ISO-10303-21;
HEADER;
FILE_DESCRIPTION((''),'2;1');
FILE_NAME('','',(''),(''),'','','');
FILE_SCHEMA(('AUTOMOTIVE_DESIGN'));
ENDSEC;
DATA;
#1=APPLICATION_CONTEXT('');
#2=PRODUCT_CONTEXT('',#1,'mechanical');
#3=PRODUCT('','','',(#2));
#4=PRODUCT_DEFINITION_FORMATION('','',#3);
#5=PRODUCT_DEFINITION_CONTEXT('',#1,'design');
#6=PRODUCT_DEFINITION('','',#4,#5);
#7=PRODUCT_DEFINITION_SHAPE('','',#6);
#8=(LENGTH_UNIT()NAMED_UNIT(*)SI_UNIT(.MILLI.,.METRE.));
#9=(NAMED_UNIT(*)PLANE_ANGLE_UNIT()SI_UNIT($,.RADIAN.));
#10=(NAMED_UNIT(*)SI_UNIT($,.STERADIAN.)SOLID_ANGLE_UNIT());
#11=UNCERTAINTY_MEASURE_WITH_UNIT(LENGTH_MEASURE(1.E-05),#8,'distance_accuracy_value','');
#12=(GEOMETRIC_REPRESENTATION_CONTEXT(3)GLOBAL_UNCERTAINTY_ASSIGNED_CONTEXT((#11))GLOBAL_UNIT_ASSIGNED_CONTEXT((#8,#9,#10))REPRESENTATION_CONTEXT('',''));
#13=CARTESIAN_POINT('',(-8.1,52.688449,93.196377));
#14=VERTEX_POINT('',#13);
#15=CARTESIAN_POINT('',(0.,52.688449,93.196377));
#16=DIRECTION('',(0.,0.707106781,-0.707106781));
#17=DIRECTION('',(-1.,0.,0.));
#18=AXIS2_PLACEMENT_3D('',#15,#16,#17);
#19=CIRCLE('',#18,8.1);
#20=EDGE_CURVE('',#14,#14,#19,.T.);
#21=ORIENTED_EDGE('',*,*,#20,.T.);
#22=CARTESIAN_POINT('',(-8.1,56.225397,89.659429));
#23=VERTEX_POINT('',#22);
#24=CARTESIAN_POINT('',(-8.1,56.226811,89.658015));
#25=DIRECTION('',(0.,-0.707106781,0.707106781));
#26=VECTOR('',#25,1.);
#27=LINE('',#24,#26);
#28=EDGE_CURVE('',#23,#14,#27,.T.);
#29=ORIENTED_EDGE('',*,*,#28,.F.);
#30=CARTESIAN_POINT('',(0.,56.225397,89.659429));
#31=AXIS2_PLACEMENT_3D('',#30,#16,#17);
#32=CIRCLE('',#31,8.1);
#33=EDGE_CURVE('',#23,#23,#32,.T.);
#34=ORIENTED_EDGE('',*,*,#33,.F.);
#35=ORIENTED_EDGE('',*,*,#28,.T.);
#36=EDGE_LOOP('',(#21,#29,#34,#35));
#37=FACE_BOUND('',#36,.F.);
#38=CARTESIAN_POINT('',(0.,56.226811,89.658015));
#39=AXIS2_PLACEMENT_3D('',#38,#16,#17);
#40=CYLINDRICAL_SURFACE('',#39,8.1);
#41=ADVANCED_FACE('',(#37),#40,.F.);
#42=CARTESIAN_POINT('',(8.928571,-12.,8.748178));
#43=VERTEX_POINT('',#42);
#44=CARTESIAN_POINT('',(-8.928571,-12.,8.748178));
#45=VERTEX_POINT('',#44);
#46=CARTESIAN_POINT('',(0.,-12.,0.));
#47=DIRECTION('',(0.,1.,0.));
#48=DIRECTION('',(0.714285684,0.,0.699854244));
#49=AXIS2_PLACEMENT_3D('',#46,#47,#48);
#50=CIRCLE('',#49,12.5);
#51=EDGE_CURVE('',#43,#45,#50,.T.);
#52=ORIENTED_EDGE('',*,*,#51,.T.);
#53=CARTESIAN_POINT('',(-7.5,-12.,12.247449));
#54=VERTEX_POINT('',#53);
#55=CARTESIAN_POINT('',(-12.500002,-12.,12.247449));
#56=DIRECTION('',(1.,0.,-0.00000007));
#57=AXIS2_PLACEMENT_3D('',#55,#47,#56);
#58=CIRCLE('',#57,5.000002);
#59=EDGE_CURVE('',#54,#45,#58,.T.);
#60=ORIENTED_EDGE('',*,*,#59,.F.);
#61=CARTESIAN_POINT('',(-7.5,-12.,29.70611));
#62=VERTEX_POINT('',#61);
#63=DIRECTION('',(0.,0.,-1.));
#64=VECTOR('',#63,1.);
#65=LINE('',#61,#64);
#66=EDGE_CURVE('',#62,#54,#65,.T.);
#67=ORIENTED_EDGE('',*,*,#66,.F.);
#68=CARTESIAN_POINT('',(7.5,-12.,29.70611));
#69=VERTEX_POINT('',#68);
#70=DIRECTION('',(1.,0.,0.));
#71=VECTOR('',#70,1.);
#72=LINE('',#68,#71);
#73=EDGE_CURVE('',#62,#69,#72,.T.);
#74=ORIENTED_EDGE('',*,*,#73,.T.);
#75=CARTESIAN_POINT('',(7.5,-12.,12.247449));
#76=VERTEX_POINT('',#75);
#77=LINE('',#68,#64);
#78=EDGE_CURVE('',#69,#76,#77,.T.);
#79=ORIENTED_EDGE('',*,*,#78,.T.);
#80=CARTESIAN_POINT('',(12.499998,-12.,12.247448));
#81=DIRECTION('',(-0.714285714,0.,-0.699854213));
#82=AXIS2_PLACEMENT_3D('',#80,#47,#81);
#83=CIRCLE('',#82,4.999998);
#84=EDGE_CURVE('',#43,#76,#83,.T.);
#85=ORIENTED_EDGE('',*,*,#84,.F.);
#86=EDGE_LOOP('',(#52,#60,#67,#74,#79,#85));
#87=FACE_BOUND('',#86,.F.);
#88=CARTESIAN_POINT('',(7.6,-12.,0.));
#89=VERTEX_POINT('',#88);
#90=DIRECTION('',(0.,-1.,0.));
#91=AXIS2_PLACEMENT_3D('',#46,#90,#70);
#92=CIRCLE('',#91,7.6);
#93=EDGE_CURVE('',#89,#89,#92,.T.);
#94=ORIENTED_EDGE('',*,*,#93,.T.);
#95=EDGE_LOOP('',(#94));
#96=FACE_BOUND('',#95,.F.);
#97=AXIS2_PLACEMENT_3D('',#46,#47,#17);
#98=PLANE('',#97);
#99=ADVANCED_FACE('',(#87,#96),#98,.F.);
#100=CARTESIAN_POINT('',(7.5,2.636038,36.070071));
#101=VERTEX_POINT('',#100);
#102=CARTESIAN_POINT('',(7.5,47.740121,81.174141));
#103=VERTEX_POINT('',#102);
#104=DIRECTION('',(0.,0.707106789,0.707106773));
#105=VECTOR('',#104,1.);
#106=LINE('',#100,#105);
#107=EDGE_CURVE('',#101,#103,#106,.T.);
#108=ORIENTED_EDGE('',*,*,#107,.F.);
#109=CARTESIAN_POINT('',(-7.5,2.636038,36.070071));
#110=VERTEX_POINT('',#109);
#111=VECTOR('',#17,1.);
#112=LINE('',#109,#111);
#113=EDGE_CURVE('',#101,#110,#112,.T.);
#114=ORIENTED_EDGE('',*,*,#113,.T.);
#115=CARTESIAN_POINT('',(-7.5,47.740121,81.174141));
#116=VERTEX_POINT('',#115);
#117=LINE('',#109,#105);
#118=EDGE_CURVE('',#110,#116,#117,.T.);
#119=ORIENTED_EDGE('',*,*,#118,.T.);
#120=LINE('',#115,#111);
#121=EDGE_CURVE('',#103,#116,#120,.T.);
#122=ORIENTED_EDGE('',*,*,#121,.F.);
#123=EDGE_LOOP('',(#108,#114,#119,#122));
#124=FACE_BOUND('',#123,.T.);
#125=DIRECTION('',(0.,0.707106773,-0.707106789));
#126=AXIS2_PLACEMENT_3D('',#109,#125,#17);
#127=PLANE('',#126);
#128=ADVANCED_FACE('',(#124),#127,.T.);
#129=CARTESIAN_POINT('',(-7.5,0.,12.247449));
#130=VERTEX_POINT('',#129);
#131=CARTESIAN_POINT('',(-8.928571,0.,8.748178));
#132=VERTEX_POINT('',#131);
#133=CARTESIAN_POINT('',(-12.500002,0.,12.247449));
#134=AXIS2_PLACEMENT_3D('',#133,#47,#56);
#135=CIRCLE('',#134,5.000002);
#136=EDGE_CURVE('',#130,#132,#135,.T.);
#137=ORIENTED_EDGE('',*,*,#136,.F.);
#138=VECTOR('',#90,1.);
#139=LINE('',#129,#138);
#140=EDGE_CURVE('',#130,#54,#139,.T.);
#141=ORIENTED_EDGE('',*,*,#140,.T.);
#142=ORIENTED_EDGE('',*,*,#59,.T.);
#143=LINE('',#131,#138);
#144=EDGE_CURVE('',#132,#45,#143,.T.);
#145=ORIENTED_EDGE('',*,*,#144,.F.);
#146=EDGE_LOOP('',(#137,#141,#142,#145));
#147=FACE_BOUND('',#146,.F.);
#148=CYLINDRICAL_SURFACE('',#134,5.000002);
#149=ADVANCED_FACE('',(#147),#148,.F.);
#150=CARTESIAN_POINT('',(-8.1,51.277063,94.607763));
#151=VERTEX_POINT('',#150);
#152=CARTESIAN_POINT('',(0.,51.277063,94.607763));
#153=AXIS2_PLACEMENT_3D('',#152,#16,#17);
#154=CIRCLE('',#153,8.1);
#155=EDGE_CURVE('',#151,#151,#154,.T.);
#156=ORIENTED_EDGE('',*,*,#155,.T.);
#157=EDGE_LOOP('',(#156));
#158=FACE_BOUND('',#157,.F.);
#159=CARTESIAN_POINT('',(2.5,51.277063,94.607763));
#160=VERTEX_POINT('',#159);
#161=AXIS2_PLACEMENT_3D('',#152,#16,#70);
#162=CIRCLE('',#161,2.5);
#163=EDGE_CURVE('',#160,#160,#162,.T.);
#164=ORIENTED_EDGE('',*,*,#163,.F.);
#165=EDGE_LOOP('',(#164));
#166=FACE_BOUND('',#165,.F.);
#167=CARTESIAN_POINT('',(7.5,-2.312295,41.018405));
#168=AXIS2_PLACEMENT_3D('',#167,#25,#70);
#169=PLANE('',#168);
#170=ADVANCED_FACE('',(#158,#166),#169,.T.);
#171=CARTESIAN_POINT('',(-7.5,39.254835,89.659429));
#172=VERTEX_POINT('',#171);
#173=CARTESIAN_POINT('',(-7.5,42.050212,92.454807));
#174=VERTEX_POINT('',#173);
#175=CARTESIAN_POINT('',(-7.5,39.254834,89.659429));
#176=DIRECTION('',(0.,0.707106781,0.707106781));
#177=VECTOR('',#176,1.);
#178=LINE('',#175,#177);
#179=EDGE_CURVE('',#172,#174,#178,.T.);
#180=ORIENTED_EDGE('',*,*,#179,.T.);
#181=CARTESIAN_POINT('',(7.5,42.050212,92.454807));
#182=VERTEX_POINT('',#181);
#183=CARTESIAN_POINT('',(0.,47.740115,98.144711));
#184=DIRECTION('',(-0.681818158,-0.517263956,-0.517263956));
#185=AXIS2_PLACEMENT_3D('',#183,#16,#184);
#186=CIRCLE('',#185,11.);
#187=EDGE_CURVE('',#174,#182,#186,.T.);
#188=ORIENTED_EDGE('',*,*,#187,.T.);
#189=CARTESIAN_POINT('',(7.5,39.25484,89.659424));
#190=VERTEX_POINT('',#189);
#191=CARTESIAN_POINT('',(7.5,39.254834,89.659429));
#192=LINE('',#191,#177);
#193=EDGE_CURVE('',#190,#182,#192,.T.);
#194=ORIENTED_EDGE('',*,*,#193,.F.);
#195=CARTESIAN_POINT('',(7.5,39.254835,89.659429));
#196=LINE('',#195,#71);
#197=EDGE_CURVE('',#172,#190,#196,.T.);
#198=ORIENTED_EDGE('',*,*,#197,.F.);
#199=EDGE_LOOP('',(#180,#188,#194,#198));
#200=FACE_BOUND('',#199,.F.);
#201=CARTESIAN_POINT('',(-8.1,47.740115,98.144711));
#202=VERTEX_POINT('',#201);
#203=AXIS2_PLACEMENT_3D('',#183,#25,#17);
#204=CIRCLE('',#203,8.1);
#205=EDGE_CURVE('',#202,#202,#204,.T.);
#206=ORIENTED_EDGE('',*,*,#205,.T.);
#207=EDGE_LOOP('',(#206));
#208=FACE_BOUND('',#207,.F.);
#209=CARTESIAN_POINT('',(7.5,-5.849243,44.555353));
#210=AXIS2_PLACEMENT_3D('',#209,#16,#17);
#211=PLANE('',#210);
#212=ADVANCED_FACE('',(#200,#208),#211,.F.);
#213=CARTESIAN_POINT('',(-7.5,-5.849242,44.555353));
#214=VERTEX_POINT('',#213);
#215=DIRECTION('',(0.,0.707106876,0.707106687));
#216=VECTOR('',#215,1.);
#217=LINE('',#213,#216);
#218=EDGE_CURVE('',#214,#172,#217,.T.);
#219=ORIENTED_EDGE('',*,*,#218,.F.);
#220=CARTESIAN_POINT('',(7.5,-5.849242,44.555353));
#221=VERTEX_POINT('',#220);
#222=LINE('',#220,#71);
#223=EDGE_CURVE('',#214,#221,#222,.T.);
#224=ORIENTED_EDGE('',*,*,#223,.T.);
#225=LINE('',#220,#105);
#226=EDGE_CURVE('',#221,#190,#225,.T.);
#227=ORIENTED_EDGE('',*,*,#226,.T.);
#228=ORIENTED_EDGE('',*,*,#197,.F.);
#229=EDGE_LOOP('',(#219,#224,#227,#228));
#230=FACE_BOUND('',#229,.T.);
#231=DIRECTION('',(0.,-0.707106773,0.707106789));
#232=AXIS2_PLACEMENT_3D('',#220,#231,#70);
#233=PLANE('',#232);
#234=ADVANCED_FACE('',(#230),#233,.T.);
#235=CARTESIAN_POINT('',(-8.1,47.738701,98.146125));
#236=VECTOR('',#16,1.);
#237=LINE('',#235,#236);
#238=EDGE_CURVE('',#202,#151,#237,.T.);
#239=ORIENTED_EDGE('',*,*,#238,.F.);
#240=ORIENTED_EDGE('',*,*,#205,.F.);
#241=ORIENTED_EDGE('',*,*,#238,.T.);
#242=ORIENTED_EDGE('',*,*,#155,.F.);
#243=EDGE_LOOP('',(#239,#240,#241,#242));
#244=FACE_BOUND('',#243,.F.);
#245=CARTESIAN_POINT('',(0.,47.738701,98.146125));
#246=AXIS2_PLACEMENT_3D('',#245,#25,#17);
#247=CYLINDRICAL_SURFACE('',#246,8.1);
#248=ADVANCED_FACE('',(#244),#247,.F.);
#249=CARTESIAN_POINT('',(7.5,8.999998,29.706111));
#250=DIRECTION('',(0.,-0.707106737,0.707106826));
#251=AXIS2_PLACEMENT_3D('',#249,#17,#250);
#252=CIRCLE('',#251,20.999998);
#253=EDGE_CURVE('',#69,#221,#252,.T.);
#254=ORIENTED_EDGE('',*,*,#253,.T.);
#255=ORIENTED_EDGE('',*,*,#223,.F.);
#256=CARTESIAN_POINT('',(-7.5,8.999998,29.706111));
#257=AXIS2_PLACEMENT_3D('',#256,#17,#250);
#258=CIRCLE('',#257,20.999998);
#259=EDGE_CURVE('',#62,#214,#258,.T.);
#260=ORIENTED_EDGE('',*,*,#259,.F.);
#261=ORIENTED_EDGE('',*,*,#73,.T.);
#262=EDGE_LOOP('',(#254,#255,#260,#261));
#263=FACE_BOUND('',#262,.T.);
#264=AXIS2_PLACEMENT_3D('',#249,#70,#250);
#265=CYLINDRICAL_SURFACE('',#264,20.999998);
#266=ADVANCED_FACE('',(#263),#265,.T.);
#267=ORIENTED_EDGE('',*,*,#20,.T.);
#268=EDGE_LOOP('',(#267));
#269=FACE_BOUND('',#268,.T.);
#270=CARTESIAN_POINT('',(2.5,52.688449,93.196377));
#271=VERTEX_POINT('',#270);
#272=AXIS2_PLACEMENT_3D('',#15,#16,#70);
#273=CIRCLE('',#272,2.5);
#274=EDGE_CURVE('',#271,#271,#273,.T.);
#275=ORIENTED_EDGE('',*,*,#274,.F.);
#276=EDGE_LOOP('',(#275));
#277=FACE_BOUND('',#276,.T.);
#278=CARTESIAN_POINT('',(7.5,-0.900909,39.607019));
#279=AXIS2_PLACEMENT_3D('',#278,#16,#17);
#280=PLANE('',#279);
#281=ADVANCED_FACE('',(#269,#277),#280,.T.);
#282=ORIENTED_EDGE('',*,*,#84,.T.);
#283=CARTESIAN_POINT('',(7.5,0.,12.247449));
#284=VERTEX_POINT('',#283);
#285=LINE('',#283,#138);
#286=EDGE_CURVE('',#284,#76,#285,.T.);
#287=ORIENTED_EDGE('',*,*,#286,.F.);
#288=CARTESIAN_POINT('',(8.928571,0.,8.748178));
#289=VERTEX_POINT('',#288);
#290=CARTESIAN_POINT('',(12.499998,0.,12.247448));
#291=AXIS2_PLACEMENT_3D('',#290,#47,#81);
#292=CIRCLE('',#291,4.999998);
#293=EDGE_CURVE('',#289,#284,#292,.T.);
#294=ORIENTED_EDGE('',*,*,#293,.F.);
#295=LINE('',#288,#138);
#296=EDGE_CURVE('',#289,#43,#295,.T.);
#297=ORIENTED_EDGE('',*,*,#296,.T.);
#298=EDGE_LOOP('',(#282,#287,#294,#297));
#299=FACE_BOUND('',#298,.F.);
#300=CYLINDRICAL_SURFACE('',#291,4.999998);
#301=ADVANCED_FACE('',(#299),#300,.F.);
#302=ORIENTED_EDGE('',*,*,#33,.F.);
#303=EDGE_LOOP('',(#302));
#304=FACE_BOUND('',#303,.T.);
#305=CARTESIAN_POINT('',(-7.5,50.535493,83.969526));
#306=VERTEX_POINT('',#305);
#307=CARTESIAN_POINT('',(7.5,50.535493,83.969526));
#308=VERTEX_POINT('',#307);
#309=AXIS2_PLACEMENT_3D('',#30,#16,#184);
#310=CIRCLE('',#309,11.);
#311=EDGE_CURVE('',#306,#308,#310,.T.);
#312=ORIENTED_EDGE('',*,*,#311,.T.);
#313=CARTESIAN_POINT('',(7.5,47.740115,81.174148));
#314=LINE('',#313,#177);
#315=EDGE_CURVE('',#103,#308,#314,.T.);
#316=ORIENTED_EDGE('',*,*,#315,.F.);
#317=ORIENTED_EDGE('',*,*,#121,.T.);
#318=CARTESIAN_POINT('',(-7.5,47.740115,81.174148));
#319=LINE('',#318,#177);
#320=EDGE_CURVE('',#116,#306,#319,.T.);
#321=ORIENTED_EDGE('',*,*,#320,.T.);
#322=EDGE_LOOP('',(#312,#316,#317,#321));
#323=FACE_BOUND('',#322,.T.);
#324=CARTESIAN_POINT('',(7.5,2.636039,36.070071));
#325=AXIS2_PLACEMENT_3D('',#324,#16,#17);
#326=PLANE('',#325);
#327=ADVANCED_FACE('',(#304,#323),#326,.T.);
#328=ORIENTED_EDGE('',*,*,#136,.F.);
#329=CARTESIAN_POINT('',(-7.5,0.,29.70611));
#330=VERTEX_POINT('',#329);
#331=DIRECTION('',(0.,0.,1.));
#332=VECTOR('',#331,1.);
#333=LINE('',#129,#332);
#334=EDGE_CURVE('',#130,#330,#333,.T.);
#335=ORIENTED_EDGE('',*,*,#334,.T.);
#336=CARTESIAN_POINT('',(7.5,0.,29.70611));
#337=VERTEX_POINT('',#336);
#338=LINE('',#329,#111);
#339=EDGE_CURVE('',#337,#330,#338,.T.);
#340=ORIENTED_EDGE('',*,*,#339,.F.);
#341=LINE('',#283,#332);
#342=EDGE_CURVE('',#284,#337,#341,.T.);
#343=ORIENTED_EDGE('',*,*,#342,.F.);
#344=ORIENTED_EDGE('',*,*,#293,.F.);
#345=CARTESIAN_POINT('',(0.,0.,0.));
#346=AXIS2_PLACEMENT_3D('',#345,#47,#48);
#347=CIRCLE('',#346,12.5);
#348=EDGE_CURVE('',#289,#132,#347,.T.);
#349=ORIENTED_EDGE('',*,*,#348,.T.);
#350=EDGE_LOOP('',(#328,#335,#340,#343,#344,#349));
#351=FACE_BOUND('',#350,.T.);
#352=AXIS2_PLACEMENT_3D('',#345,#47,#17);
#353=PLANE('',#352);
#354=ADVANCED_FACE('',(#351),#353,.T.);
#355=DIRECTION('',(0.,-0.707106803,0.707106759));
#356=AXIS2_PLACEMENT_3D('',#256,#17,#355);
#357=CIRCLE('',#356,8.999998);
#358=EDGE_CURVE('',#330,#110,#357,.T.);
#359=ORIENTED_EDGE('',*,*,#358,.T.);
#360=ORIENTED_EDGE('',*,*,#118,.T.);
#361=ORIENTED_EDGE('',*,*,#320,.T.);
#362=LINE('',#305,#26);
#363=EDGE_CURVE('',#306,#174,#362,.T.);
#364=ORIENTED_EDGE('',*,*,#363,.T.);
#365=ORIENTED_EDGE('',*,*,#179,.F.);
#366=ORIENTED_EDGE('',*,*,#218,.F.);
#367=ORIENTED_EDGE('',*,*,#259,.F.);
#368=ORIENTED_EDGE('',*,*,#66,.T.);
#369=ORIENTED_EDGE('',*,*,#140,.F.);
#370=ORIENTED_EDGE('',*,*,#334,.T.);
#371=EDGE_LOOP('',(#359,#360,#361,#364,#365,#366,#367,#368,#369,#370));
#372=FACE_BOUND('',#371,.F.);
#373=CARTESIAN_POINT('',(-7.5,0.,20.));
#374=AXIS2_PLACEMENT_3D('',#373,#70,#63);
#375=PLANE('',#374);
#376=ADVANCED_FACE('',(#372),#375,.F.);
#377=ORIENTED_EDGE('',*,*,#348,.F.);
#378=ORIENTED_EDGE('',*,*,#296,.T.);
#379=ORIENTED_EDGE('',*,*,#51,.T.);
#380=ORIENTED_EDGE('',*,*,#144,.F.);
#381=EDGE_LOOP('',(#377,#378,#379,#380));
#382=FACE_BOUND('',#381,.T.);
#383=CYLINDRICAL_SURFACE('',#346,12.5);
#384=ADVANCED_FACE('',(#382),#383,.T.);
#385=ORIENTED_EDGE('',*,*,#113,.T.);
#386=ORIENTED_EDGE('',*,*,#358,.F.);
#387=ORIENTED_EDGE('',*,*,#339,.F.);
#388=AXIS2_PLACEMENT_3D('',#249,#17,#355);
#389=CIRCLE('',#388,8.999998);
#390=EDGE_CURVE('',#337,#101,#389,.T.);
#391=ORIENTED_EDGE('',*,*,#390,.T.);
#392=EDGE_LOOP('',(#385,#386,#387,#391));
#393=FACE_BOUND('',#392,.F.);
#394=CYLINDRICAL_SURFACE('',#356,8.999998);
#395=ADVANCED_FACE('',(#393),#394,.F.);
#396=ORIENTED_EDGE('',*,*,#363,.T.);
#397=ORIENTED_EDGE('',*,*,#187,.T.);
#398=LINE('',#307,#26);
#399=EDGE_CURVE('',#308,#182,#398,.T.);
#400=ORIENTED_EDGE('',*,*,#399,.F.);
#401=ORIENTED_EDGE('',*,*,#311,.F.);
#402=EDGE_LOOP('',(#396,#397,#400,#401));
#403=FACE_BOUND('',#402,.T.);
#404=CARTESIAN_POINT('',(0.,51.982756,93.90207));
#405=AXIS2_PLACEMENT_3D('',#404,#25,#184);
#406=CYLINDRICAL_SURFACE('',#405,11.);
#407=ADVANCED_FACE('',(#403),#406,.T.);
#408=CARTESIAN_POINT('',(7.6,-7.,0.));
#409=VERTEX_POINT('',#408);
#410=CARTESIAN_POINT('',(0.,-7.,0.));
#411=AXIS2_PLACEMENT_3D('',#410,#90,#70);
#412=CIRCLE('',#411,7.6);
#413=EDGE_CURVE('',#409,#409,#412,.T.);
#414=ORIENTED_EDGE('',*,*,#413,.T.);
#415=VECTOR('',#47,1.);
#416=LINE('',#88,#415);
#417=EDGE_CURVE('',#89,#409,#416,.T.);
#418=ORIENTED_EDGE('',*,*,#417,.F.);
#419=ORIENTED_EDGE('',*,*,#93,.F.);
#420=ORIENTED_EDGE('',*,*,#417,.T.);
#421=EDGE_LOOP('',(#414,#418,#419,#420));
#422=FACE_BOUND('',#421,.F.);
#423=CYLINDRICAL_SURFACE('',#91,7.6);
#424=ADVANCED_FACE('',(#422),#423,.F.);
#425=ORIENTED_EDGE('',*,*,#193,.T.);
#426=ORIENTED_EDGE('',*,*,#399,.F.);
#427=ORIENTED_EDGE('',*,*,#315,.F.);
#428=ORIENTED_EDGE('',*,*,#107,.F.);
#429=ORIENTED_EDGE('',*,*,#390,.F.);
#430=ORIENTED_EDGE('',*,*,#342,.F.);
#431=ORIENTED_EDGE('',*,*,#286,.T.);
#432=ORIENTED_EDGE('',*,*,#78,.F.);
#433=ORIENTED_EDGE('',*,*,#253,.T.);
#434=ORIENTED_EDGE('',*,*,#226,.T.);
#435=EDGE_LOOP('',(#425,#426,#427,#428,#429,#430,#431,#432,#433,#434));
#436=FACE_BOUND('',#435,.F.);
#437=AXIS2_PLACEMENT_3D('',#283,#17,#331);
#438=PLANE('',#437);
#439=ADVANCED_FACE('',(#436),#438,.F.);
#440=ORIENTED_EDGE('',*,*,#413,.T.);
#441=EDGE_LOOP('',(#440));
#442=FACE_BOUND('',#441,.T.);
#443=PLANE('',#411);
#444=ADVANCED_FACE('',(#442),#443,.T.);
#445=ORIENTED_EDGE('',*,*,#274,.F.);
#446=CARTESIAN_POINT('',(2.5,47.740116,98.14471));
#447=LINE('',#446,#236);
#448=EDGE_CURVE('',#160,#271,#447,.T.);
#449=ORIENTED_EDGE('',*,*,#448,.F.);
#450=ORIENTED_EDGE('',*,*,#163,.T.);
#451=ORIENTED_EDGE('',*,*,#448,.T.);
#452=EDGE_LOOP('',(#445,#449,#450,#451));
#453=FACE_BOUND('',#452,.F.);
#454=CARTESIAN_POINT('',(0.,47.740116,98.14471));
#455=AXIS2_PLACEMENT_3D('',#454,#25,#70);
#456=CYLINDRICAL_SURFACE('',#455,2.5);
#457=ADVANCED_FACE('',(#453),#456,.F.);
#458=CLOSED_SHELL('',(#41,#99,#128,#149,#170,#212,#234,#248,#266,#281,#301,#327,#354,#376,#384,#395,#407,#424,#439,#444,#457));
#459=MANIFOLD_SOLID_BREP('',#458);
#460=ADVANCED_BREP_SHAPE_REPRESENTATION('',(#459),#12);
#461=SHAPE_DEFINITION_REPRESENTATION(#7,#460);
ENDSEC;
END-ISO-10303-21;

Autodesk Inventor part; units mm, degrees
ref_plane "YZ Plane" through (0, 0, 0) normal (1, 0, 0) x (0, 1, 0)
ref_plane "XZ Plane" through (0, 0, 0) normal (0, 1, 0) x (-1, 0, 0)
sketch "Sketch1" plane through (0, 0, 0) normal (0, 1, 0) x (-1, 0, 0)
  arc A0 (-8.928571, 8.748178) -> (8.928571, 8.748178) centre (0, 0) ccw
  line L0 (-7.5, 12.247449) -> (-7.5, 20)
  line L1 (7.5, 20) -> (7.5, 12.247449)
  line L2 (7.5, 20) -> (-7.5, 20)
  arc A1 (7.5, 12.247449) -> (8.928571, 8.748178) centre (12.5, 12.247449) ccw
  arc A2 (-8.928571, 8.748178) -> (-7.5, 12.247449) centre (-12.5, 12.247449) ccw
  point P0 (7.5, 10)
  point P1 (-7.5, 10)
  point P2 (0, 10)
  point P3 (0, 20)
  dimension "d0" = 25
  dimension "d106" = 15
  dimension "d107" = 10
  dimension "d108" = 10
  dimension "d109" = 5
extrude "Extrusion1" add sketch "Sketch1" against normal blind 12
sketch "Sketch22" plane through (-7.5, 0, 20) normal (0, 0, 1) x (1, 0, 0)
  line L0 (0, 0) -> (0, -12) projected
  line L1 (15, -12) -> (0, -12) projected
  line L2 (0, 0) -> (15, 0)
  line L3 (15, 0) -> (15, -12)
  line L4 (15, -12) -> (0, -12)
  line L5 (0, -12) -> (0, 0)
  point P0 (7.5, 0)
sketch "Sketch23" plane through (0, 0, 0) normal (1, 0, 0) x (0, 1, 0)
  line L0 (0, 20) -> (-12, 20)
  line L1 (-6, 20) -> (-6, 29.70611)
  line L2 (-1.606602, 40.312712) -> (43.497475, 85.416788)
  arc A0 (-1.606602, 40.312712) -> (-6, 29.70611) centre (9, 29.70611) ccw
  point P0 (0, 0)
  point P1 (-6, 35.919313)
  dimension "d110" = 15.91931
  dimension "d111" = 70
  dimension "d112" = 135
  dimension "d113" = 15
sweep "Sweep2" add profiles "Sketch22" path "Sketch23" path curves L1 A0 L2
ref_plane "Work Plane11" through (7.5, -1.606602, 40.312712) normal (0, 0.7071068, -0.7071068) x (-1, 0, 0)
sketch "Sketch24" plane through (7.5, -1.606602, 40.312712) normal (0, 0.7071068, -0.7071068) x (-1, 0, 0)
  line L0 (0, 63.786797) -> (15, 63.786797)
  line L1 (0, 63.786797) -> (15, 63.786797)
  line L2 (0, 63.786797) -> (0, 67.740058)
  line L3 (15, 63.786797) -> (15, 67.740058)
  arc A0 (15, 67.740058) -> (0, 67.740058) centre (7.5, 75.786797) ccw
  line L4 (0, 63.786797) -> (15, 63.786797)
  point P0 (7.5, -27.369353)
  point P1 (7.5, 63.786797)
  point P2 (7.5, 63.786797)
  dimension "d129" = 22
  dimension "d130" = 12
extrude "Extrusion17" add sketch "Sketch24" along normal mid plane 12
sketch "Sketch25" plane through (-7.5, -5.849242, 44.555352) normal (0, -0.7071068, 0.7071068) x (1, 0, 0)
  circle A0 centre (7.5, 75.786797) radius 2.5
  arc A1 (15, 67.740058) -> (0, 67.740058) centre (7.5, 75.786797) ccw
  point P0 (7.5, -27.369353)
  dimension "d123" = 5
extrude "Extrusion18" cut sketch "Sketch25" against normal through all
sketch "Sketch26" plane through (0, -12, 0) normal (0, -1, 0) x (1, 0, 0)
  circle A0 centre (0, 0) radius 7.6
  dimension "d126" = 15.2
extrude "Extrusion19" cut sketch "Sketch26" against normal blind 5
sketch "Sketch27" plane through (7.5, 2.636039, 36.070071) normal (0, 0.7071068, -0.7071068) x (-1, 0, 0)
  circle A0 centre (7.5, 75.786797) radius 2.5
  circle A1 centre (7.5, 75.786797) radius 8.1
  point P0 (7.5, -27.369353)
  dimension "d131" = 16.2
extrude "Extrusion20" cut sketch "Sketch27" against normal blind 5
mirror "Mirror2" about plane through (7.5, -1.606602, 40.312712) normal (0, 0.7071068, -0.7071068) of "Extrusion20"
properties part number "proximal_link_3"
